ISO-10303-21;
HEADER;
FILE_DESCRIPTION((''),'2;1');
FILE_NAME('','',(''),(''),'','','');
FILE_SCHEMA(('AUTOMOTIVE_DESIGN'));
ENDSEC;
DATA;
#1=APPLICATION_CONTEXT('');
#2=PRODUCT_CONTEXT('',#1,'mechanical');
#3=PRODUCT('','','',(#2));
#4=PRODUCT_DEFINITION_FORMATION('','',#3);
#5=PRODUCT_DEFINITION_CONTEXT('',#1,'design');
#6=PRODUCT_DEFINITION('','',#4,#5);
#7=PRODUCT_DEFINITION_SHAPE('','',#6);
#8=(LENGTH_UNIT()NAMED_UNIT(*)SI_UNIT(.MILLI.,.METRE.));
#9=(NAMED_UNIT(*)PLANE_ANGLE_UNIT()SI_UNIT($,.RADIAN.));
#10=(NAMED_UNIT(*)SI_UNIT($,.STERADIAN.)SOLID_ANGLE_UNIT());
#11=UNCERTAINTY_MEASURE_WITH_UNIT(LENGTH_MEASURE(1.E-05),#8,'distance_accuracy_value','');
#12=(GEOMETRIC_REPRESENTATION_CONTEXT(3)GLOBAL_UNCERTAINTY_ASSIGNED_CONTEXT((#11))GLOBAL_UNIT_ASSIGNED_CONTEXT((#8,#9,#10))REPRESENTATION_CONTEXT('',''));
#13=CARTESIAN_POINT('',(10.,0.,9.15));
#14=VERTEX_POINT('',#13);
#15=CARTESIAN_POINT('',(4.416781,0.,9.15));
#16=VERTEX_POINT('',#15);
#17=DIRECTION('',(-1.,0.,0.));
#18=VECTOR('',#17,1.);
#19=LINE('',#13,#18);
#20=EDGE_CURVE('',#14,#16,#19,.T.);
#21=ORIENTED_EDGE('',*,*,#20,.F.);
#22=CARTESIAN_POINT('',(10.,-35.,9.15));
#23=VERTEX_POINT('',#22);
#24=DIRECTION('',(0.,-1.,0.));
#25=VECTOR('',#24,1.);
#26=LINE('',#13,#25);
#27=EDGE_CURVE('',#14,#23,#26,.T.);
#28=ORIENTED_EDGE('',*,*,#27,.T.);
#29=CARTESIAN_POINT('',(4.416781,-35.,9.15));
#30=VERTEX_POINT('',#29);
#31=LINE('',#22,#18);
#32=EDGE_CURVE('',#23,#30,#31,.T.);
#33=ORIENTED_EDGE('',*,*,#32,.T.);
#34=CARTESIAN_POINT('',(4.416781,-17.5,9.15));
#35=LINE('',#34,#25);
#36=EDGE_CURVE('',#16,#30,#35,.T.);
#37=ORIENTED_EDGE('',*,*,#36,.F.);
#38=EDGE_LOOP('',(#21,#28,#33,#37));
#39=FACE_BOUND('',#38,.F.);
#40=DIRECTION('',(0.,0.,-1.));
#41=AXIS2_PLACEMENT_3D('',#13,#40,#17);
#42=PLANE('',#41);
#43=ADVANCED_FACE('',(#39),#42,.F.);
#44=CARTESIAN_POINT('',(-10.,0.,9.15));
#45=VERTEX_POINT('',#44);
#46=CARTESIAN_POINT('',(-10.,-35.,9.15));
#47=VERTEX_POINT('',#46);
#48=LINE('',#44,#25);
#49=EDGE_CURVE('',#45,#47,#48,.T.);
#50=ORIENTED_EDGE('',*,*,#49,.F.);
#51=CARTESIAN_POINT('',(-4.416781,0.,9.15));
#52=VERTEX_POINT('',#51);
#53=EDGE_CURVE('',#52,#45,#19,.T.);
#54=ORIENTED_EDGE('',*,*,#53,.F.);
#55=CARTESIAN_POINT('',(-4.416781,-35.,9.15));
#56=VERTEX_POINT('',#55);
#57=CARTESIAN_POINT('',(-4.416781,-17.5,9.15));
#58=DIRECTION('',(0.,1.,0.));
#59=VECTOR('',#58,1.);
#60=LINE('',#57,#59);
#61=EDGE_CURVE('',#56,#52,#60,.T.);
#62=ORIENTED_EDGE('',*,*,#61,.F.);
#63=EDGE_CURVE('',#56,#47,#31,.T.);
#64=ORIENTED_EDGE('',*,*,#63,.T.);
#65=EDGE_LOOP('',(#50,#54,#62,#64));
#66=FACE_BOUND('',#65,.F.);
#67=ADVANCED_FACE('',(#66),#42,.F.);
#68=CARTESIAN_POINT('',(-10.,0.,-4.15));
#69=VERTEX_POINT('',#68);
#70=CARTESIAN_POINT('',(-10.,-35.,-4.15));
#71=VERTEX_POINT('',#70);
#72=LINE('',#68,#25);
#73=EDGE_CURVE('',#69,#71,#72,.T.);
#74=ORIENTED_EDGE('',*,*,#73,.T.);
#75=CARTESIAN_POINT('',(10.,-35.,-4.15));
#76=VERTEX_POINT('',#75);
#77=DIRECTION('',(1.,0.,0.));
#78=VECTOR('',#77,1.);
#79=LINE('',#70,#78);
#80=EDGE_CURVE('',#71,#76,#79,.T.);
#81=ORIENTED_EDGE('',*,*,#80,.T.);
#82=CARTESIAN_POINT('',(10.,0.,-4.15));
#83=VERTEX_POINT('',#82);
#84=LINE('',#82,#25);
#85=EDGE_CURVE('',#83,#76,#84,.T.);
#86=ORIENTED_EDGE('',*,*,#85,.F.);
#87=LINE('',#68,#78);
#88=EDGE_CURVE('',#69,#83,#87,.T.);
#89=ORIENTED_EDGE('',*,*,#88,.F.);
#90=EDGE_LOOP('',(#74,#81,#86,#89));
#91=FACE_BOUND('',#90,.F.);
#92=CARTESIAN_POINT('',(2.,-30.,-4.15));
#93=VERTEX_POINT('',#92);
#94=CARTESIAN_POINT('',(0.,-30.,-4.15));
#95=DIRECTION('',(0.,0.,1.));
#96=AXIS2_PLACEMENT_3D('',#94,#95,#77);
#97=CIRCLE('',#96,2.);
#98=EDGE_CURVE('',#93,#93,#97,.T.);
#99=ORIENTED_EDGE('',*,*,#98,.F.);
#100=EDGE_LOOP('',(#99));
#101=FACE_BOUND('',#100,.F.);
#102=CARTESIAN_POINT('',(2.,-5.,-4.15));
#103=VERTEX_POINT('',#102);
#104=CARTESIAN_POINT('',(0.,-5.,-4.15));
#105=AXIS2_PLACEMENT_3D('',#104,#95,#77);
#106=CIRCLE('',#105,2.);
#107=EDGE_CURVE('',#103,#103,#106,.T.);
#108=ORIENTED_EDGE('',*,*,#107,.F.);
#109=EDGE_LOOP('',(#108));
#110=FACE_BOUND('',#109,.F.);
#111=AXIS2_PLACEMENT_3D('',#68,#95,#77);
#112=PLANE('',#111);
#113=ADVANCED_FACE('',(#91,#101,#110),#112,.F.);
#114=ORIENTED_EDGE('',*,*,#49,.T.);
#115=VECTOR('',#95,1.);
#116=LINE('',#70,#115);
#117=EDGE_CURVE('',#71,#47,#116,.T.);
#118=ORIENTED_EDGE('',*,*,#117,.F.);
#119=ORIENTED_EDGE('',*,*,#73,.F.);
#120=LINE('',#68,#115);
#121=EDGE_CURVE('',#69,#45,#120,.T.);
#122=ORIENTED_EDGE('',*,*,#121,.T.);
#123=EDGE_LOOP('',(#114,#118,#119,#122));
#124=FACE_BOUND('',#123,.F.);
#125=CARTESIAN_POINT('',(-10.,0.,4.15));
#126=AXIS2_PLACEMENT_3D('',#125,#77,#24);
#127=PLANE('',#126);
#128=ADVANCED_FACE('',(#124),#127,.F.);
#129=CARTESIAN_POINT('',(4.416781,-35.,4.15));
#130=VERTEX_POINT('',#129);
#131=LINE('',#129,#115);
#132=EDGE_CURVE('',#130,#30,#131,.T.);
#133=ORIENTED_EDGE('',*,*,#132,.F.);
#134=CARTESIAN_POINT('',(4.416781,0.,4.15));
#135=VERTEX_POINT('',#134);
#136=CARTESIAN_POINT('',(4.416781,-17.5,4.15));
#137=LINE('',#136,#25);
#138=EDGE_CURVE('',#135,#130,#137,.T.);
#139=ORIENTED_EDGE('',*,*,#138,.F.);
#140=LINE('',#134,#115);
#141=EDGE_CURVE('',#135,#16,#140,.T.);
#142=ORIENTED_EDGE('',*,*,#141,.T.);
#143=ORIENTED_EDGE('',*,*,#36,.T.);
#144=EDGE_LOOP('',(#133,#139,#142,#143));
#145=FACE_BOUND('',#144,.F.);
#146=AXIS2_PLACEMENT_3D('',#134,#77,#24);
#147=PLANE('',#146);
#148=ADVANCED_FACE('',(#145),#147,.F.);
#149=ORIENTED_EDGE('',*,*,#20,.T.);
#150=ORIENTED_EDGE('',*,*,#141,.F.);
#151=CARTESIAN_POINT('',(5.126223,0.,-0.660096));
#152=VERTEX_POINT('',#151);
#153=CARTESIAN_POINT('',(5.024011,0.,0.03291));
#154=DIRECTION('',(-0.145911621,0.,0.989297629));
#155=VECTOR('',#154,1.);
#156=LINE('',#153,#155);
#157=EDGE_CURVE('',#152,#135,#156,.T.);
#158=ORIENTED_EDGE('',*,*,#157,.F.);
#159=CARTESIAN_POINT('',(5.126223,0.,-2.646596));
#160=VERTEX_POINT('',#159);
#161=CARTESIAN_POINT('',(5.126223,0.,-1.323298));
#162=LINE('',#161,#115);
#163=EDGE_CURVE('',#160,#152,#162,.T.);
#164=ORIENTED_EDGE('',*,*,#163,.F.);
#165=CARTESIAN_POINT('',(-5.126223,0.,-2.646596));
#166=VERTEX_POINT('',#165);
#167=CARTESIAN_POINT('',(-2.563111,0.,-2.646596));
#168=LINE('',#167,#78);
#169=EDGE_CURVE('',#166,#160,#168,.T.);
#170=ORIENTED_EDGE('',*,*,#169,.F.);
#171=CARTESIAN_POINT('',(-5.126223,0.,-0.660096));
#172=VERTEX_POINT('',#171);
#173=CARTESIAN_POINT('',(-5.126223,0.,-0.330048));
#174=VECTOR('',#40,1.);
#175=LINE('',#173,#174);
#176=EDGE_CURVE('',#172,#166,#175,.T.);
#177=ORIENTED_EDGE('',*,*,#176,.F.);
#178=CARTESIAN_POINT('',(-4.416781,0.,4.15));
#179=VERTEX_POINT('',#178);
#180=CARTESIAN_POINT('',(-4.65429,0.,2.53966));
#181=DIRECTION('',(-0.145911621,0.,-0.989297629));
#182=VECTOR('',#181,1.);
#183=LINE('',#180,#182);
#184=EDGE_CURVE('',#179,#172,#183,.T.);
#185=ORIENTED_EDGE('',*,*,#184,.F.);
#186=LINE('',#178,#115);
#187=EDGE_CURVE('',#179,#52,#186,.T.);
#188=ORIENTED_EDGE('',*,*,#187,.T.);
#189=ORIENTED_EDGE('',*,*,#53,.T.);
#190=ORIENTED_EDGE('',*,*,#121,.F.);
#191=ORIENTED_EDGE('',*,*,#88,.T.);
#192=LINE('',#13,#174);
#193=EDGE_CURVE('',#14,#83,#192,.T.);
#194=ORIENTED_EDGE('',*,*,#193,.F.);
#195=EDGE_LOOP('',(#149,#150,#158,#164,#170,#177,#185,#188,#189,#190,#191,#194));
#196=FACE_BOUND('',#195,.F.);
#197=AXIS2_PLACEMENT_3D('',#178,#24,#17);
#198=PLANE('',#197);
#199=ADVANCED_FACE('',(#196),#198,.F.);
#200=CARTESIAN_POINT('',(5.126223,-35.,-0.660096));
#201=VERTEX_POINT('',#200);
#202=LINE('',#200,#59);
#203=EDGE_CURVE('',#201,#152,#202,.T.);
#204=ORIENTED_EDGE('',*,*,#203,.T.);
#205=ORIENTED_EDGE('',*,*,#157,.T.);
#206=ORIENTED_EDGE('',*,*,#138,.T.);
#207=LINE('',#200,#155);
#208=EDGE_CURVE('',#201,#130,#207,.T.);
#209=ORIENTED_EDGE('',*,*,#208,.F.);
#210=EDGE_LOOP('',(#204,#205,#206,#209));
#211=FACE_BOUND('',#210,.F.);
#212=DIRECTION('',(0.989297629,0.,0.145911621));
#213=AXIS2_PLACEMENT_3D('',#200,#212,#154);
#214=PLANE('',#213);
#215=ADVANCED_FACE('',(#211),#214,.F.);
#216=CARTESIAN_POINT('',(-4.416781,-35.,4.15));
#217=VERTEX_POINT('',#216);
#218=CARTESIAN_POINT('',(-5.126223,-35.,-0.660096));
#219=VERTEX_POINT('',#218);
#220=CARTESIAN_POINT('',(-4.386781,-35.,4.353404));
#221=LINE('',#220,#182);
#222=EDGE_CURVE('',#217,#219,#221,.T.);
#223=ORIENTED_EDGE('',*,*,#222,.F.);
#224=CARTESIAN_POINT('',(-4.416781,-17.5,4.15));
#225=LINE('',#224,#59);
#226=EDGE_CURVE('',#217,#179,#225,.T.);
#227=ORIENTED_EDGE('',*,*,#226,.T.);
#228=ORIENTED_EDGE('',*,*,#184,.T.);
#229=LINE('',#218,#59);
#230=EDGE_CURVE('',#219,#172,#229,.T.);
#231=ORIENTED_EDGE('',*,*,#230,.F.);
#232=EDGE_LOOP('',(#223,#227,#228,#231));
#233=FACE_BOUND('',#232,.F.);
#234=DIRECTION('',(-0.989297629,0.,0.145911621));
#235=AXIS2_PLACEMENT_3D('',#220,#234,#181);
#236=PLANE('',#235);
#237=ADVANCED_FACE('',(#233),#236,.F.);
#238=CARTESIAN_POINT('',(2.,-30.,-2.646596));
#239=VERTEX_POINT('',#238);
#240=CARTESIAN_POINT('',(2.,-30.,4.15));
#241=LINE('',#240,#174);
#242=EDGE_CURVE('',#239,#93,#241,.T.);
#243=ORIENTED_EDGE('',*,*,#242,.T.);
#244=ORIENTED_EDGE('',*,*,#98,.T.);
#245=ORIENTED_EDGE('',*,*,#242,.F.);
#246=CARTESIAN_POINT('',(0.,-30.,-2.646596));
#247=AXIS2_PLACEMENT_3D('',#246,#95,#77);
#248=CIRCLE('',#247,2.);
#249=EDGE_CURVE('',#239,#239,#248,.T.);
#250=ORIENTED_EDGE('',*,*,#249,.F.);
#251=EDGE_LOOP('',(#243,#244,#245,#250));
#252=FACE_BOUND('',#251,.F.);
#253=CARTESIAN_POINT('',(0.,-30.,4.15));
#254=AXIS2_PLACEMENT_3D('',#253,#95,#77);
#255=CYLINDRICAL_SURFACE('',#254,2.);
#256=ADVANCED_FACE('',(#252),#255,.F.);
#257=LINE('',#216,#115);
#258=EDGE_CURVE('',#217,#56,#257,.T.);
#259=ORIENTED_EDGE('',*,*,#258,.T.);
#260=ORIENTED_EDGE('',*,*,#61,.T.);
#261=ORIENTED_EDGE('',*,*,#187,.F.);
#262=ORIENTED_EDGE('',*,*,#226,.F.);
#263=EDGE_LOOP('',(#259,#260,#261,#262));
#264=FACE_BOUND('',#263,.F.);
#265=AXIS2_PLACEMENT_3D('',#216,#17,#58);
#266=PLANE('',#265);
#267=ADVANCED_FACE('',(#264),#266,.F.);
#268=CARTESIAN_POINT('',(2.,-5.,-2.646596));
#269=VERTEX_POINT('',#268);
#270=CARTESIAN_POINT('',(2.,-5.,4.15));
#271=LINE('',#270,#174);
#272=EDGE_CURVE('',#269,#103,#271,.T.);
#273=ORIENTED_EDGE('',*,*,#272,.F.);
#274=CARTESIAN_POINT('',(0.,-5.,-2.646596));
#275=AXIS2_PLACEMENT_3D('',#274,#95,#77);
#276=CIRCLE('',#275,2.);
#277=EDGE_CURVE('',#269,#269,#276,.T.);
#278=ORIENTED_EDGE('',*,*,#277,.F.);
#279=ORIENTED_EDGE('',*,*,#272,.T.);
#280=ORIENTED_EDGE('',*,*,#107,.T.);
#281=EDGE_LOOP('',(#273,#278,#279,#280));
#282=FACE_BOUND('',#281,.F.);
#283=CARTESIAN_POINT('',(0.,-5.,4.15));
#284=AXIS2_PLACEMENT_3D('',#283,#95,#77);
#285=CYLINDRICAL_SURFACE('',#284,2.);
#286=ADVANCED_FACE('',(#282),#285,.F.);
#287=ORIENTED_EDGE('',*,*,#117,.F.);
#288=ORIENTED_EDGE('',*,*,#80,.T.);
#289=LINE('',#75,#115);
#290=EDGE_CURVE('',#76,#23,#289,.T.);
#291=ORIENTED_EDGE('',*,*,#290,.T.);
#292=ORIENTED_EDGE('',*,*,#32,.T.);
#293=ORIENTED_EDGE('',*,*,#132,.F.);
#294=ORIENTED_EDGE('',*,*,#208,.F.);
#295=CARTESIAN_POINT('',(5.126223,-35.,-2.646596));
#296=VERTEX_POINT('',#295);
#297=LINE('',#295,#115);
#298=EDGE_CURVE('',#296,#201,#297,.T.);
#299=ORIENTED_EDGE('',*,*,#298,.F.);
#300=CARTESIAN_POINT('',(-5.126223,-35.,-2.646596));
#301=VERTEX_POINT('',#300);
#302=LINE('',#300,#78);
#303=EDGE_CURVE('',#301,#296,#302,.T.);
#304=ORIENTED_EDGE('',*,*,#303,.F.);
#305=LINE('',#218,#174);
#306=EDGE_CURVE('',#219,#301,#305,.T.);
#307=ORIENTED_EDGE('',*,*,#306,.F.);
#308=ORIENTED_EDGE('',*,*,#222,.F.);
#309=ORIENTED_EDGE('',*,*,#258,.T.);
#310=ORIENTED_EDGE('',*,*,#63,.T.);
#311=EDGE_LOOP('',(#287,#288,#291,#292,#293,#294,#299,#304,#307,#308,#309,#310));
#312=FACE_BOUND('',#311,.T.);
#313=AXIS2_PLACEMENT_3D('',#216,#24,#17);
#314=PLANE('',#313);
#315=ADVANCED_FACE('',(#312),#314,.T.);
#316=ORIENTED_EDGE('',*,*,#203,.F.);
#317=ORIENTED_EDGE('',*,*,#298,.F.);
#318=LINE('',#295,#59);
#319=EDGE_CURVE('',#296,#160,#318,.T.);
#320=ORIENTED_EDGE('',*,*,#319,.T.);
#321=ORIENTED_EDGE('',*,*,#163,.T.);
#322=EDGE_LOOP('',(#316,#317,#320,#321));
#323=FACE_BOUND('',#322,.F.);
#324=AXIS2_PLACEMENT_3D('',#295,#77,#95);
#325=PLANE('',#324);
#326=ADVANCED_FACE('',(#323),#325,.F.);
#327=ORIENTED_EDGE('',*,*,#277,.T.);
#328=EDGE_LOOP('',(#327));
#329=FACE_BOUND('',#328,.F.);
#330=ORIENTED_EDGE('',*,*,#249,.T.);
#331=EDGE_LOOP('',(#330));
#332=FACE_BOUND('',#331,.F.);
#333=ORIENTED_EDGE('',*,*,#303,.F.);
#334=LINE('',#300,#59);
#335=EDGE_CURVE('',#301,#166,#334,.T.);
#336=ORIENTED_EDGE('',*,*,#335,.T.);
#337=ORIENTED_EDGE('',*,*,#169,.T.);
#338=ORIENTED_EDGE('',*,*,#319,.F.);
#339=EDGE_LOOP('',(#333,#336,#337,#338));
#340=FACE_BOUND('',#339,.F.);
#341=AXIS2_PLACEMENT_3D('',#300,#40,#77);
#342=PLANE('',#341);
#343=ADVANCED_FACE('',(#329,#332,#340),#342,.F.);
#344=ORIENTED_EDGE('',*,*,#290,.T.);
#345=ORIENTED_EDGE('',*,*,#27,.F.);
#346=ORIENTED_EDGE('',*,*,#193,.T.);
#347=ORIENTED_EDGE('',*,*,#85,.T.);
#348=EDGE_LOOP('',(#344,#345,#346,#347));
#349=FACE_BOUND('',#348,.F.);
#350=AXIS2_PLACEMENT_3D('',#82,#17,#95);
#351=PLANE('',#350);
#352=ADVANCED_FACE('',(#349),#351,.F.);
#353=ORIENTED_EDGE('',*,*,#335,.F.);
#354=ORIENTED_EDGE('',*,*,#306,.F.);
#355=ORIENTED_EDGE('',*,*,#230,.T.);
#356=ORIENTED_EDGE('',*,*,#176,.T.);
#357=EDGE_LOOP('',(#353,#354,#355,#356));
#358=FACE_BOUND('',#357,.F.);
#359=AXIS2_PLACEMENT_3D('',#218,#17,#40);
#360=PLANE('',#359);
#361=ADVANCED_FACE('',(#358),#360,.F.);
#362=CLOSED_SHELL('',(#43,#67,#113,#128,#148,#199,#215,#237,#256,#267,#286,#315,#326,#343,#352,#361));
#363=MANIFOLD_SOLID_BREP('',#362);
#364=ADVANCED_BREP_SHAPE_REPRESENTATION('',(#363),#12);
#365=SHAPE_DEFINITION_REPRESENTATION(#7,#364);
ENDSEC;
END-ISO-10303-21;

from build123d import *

# Parameters (mm, degrees)
F1_DEPTH = 35
F2_R     = 2
F3_DEPTH = 8.301
F8_DEPTH = 35.001
F9_DEPTH = 5


# Not quite as in the source:
# - a feature names something its author has since deleted; it is built from what else it names


with BuildPart() as f1:
    # F0 (on Front) → F1 (new body)
    with BuildSketch(Plane.XZ):
        Polygon((10, 4.15), (4.15, 4.15), (-4.15, 4.15), (-10, 4.15), (-10, -4.15), (-4.15, -4.15), (4.15, -4.15), (10, -4.15), align=None)
        with BuildLine():
            ThreePointArc((5.15, -1.65), (4.8571067812, -2.3571067812), (4.15, -2.65))
            Line((4.15, -2.65), (-4.15, -2.65))
            ThreePointArc((-4.15, -2.65), (-4.8571067812, -2.3571067812), (-5.15, -1.65))
            Line((-5.15, -1.65), (-5.15, 1.65))
            ThreePointArc((-5.15, 1.65), (-4.8571067812, 2.3571067812), (-4.15, 2.65))
            Line((-4.15, 2.65), (4.15, 2.65))
            ThreePointArc((4.15, 2.65), (4.8571067812, 2.3571067812), (5.15, 1.65))
            Line((5.15, 1.65), (5.15, -1.65))
        make_face(mode=Mode.SUBTRACT)
        with BuildLine():
            Line((-4.15, -2.65), (4.15, -2.65))
            ThreePointArc((4.15, -2.65), (4.8571067812, -2.3571067812), (5.15, -1.65))
            Line((5.15, -1.65), (5.15, 1.65))
            ThreePointArc((5.15, 1.65), (4.8571067812, 2.3571067812), (4.15, 2.65))
            Line((4.15, 2.65), (-4.15, 2.65))
            ThreePointArc((-4.15, 2.65), (-4.8571067812, 2.3571067812), (-5.15, 1.65))
            Line((-5.15, 1.65), (-5.15, -1.65))
            ThreePointArc((-5.15, -1.65), (-4.8571067812, -2.3571067812), (-4.15, -2.65))
        make_face()
    extrude(amount=F1_DEPTH)

    # F2 (on face) → F3 (cut, through all)
    with BuildSketch(Plane.XY.offset(4.15)):
        with Locations((0, -5)):
            Circle(F2_R)
        with Locations((0, -30)):
            Circle(F2_R)
    extrude(amount=-F3_DEPTH, mode=Mode.SUBTRACT)

    # F7 (on offset) → F8 (cut, through all)
    with BuildSketch(Plane.XZ.offset(35)):
        Polygon((-5.1262229681, -2.646596171), (0, -2.646596171), (5.1262229681, -2.646596171), (5.1262229681, -0.6600963534), (4.3867812492, 4.353403829), (0, 4.353403829), (-4.3867812492, 4.353403829), (-5.1262229681, -0.6600963534), align=None)
    extrude(amount=-F8_DEPTH, mode=Mode.SUBTRACT)

    # F9 (add): faces of the model
    f9_faces = [f1.faces().sort_by_distance(p)[0] for p in [
        (-7.2083906517, -17.5, 4.15),
        (7.2083906517, -17.5, 4.15),
    ]]
    extrude(f9_faces, amount=F9_DEPTH)


solid = f1.part
